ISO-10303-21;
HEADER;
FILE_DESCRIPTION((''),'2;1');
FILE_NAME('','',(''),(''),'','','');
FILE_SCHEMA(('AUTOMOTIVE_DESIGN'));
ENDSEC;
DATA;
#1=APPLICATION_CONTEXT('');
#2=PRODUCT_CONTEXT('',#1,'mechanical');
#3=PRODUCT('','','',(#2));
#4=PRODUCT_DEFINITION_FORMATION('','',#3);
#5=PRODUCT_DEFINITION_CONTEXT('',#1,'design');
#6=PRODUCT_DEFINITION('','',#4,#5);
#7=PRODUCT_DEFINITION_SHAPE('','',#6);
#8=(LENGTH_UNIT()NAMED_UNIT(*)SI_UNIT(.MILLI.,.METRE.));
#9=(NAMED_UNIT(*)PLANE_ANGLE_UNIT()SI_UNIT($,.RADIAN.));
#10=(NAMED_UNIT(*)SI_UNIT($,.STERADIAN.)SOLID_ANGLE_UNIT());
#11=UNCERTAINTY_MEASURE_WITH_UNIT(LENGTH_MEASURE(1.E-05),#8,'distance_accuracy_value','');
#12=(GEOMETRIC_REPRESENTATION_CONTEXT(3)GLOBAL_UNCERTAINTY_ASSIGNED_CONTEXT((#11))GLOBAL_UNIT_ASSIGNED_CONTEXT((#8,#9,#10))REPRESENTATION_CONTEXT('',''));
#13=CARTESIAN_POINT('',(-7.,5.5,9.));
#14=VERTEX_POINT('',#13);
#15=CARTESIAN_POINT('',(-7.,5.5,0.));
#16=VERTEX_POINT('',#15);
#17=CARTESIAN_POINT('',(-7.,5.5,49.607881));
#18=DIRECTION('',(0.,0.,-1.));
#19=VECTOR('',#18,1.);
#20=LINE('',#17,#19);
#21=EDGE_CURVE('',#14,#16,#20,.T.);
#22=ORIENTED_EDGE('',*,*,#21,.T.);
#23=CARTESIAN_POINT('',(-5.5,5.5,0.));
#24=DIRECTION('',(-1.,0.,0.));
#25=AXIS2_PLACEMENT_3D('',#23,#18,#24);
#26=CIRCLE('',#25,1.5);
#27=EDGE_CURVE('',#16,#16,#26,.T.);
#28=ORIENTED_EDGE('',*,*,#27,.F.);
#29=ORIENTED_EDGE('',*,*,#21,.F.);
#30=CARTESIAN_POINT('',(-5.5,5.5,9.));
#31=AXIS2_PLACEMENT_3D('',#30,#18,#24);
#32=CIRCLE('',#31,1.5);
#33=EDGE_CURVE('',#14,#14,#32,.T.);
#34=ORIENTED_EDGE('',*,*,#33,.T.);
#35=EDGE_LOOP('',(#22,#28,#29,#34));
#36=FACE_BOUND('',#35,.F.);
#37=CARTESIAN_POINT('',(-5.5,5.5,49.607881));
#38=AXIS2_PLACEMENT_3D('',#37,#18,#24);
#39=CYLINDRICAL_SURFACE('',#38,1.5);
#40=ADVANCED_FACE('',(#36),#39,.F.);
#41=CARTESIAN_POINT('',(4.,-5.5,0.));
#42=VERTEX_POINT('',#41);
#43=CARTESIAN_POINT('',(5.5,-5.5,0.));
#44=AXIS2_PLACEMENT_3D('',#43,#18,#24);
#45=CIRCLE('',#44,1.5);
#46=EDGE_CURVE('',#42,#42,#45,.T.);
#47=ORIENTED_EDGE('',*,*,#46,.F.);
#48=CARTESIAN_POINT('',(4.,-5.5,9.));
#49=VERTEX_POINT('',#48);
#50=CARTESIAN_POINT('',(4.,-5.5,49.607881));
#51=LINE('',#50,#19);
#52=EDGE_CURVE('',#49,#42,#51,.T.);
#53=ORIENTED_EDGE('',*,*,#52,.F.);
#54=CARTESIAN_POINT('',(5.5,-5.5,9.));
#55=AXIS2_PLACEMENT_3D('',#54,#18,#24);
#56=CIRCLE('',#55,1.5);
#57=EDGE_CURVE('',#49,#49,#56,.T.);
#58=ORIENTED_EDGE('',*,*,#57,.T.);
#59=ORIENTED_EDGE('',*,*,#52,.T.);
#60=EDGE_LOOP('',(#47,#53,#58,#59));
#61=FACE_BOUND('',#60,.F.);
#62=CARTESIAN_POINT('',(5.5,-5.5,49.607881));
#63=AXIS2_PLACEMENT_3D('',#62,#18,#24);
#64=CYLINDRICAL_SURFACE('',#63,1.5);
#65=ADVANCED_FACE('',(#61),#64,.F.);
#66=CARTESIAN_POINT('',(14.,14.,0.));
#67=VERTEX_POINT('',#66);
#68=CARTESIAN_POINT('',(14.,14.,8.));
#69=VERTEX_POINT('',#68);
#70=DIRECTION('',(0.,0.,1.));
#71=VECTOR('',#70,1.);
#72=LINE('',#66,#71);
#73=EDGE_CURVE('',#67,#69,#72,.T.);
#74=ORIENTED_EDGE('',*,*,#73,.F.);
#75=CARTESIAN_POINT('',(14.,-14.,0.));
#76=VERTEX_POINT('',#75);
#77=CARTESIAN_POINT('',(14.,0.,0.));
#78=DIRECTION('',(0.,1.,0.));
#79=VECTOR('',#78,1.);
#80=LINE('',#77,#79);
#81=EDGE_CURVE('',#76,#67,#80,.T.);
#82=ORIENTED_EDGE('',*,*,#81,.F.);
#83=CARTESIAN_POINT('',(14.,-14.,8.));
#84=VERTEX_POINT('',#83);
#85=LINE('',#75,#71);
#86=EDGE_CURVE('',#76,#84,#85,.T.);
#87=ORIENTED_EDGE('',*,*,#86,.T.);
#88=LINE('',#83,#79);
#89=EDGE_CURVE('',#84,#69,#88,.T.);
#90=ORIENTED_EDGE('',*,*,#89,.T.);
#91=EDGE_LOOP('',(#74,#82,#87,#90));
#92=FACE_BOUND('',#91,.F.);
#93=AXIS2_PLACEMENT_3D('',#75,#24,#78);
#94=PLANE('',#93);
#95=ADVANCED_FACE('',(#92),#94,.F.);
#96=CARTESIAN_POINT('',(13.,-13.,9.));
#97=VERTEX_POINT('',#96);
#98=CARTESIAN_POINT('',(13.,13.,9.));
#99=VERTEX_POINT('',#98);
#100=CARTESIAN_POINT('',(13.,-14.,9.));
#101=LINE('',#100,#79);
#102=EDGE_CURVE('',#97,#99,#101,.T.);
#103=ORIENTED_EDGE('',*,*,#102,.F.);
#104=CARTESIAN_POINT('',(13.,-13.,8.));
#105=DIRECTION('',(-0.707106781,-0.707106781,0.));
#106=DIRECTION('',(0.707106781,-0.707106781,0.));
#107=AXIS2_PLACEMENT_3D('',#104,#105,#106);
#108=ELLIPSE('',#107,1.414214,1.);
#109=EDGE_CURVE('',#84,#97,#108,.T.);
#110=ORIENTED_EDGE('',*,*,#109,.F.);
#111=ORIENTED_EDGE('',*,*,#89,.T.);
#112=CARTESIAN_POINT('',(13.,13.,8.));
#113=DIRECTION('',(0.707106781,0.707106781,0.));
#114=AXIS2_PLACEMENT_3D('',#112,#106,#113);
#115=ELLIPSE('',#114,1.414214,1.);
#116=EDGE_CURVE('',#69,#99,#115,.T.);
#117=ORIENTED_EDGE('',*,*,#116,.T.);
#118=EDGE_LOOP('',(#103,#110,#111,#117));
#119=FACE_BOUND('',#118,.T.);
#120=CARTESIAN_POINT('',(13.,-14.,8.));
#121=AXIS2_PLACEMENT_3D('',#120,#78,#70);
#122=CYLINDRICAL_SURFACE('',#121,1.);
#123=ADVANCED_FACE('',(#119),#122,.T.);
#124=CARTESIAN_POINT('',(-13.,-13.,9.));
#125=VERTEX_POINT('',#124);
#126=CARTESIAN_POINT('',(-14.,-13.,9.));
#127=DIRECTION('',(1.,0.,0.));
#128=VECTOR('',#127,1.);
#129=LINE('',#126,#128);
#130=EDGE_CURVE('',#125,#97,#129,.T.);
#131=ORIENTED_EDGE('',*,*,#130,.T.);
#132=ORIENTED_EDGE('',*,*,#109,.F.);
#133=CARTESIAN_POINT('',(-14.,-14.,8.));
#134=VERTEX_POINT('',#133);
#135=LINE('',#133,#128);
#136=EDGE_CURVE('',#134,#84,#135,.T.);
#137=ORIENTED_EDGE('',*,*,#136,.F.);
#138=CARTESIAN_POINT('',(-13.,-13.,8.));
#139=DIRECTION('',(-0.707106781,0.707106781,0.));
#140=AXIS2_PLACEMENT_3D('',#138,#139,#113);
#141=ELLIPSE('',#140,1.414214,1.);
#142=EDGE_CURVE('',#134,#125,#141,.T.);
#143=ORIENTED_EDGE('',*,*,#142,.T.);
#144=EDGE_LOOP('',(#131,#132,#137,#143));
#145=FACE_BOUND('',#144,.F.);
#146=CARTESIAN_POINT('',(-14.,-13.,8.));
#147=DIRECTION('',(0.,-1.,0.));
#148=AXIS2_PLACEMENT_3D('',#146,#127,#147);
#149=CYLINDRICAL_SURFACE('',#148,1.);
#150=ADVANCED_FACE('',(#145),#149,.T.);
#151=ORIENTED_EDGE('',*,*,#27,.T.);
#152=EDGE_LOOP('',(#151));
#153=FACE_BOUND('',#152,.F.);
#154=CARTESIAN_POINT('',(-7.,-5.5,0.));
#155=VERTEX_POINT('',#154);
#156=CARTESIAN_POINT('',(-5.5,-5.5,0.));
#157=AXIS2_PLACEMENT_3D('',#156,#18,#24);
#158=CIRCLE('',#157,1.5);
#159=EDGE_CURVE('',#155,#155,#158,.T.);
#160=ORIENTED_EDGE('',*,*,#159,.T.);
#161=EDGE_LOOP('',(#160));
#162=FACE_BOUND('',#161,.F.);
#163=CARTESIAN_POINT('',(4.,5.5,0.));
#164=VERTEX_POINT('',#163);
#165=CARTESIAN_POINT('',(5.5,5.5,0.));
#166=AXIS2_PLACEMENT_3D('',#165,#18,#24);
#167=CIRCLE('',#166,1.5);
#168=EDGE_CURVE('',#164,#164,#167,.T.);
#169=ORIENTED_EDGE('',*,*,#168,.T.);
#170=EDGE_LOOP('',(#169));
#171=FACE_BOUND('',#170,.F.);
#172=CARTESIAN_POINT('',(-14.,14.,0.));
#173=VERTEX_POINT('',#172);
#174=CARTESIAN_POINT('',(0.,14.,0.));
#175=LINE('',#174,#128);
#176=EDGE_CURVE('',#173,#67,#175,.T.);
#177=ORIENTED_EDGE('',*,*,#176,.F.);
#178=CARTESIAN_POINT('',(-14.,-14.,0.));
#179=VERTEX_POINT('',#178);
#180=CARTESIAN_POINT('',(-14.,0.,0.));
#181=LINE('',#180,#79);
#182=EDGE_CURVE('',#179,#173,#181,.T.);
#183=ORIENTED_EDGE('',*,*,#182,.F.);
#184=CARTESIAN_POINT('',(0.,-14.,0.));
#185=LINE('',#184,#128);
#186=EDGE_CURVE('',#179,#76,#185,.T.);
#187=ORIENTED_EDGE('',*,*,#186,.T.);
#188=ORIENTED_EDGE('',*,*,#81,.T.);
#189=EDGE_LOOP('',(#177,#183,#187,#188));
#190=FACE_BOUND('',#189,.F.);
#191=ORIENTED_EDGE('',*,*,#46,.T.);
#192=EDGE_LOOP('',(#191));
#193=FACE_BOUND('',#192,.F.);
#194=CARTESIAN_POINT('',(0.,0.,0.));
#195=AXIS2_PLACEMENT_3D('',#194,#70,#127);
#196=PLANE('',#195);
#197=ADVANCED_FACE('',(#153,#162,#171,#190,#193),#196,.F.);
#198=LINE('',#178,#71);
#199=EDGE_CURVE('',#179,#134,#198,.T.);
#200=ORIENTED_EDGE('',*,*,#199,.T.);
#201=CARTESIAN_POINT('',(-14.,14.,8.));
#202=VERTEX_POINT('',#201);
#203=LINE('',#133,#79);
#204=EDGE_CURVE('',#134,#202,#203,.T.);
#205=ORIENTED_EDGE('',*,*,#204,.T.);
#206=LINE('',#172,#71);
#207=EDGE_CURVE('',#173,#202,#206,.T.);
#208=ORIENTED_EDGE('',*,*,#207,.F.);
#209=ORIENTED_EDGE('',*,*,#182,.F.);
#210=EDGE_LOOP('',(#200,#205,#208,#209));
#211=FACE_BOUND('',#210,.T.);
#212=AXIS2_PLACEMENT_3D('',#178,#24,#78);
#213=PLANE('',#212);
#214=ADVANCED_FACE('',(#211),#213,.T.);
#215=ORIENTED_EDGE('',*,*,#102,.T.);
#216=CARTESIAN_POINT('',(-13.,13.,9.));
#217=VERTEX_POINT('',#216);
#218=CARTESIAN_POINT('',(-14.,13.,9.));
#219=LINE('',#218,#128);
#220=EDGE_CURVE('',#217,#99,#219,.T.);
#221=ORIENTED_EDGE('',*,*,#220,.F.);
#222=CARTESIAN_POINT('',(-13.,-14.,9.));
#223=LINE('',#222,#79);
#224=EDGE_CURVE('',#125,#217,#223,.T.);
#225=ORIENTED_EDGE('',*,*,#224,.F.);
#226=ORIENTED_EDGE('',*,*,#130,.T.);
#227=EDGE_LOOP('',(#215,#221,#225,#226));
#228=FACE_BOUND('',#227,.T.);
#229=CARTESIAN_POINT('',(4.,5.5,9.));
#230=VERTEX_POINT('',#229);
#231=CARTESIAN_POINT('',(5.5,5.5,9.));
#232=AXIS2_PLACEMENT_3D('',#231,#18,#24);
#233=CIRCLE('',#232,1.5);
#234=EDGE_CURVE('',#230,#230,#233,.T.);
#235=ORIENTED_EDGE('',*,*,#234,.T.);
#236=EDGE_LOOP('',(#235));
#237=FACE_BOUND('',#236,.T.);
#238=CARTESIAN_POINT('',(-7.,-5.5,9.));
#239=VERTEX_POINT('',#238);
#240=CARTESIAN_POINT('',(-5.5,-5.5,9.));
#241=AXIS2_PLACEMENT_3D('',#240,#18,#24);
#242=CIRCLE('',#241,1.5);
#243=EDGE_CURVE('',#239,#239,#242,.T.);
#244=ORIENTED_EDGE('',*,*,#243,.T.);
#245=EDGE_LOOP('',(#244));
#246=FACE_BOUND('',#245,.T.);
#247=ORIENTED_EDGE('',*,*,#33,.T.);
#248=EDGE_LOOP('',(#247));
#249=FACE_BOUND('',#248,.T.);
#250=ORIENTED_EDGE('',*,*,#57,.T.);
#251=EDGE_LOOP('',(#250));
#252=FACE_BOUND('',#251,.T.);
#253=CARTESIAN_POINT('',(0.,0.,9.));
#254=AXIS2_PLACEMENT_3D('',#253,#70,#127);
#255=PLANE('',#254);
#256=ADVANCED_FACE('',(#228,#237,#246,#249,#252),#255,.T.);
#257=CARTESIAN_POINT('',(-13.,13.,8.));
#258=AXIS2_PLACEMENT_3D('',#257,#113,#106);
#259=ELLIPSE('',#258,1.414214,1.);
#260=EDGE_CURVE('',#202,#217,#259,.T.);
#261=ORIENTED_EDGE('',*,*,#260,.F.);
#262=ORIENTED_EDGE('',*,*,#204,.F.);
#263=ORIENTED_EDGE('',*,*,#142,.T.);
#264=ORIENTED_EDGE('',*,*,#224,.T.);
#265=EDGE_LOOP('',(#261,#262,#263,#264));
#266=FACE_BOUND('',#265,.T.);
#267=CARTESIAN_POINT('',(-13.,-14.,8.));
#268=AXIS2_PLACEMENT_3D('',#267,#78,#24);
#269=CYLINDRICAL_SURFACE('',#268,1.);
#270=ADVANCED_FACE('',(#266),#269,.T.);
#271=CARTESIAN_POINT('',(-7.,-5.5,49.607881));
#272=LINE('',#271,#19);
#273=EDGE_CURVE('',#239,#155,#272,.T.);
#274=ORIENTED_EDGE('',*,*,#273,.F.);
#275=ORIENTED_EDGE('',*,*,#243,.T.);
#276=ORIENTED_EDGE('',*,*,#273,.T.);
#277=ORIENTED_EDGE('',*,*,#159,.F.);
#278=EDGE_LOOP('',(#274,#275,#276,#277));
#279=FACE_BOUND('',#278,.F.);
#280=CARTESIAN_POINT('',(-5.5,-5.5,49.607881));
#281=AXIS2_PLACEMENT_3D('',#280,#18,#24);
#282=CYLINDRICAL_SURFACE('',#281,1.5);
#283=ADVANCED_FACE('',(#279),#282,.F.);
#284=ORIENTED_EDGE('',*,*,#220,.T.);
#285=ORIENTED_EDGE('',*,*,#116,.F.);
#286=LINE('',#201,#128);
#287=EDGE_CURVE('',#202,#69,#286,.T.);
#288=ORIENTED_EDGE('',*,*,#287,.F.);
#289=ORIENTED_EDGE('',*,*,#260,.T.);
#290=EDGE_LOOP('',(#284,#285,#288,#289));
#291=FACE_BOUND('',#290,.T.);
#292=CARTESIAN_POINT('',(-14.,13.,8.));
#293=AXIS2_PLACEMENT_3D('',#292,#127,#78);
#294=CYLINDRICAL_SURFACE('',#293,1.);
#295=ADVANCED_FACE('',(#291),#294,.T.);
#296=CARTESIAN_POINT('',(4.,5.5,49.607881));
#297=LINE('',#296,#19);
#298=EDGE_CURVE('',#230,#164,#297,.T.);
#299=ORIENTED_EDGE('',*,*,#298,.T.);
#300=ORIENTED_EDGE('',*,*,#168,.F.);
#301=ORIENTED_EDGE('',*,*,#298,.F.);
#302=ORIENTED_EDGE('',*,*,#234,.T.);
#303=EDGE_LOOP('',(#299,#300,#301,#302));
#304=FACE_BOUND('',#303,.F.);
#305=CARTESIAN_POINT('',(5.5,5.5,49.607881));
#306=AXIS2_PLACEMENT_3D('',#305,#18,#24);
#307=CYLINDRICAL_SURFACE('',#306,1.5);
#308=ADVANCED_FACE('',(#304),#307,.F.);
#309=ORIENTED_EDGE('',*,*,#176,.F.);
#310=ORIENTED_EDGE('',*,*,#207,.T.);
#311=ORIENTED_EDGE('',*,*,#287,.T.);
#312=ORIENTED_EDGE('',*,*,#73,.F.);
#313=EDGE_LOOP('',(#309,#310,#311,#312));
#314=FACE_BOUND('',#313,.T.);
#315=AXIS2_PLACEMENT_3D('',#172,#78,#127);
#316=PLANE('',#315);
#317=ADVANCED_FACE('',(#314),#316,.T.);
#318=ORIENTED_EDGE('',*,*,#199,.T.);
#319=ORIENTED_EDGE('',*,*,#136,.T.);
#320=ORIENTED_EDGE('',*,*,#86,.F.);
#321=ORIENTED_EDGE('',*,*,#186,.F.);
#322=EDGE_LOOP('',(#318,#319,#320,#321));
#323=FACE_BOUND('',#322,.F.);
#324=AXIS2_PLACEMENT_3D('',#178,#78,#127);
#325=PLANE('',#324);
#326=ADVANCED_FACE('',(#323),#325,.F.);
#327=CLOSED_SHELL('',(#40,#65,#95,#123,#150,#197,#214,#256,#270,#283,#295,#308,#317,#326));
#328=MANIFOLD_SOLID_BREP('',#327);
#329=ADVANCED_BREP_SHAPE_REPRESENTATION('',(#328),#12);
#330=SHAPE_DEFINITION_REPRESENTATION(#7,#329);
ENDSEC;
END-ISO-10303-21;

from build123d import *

# Parameters (mm, degrees)
F0_W     = 28
F0_H     = 28
F1_DEPTH = 9
F3_D     = 3
F4_R     = 1


# Not quite as in the source:
# - a feature names something its author has since deleted; it is built from what else it names


with BuildPart() as f1:
    # F0 (on Top) → F1 (new body)
    with BuildSketch(Plane.XY):
        Rectangle(F0_W, F0_H)
    extrude(amount=F1_DEPTH)

    # F3 (through all)
    with Locations(Plane.XY.offset(9)):
        with Locations((5.5, 5.5), (-5.5, 5.5), (-5.5, -5.5), (5.5, -5.5)):
            Hole(F3_D / 2)

    # F4
    f4_edges = [f1.edges().sort_by_distance(p)[0] for p in [
        (0, 14, 9),
        (-14, 0, 9),
        (0, -14, 9),
        (14, 0, 9),
    ]]
    fillet(f4_edges, radius=F4_R)


solid = f1.part
